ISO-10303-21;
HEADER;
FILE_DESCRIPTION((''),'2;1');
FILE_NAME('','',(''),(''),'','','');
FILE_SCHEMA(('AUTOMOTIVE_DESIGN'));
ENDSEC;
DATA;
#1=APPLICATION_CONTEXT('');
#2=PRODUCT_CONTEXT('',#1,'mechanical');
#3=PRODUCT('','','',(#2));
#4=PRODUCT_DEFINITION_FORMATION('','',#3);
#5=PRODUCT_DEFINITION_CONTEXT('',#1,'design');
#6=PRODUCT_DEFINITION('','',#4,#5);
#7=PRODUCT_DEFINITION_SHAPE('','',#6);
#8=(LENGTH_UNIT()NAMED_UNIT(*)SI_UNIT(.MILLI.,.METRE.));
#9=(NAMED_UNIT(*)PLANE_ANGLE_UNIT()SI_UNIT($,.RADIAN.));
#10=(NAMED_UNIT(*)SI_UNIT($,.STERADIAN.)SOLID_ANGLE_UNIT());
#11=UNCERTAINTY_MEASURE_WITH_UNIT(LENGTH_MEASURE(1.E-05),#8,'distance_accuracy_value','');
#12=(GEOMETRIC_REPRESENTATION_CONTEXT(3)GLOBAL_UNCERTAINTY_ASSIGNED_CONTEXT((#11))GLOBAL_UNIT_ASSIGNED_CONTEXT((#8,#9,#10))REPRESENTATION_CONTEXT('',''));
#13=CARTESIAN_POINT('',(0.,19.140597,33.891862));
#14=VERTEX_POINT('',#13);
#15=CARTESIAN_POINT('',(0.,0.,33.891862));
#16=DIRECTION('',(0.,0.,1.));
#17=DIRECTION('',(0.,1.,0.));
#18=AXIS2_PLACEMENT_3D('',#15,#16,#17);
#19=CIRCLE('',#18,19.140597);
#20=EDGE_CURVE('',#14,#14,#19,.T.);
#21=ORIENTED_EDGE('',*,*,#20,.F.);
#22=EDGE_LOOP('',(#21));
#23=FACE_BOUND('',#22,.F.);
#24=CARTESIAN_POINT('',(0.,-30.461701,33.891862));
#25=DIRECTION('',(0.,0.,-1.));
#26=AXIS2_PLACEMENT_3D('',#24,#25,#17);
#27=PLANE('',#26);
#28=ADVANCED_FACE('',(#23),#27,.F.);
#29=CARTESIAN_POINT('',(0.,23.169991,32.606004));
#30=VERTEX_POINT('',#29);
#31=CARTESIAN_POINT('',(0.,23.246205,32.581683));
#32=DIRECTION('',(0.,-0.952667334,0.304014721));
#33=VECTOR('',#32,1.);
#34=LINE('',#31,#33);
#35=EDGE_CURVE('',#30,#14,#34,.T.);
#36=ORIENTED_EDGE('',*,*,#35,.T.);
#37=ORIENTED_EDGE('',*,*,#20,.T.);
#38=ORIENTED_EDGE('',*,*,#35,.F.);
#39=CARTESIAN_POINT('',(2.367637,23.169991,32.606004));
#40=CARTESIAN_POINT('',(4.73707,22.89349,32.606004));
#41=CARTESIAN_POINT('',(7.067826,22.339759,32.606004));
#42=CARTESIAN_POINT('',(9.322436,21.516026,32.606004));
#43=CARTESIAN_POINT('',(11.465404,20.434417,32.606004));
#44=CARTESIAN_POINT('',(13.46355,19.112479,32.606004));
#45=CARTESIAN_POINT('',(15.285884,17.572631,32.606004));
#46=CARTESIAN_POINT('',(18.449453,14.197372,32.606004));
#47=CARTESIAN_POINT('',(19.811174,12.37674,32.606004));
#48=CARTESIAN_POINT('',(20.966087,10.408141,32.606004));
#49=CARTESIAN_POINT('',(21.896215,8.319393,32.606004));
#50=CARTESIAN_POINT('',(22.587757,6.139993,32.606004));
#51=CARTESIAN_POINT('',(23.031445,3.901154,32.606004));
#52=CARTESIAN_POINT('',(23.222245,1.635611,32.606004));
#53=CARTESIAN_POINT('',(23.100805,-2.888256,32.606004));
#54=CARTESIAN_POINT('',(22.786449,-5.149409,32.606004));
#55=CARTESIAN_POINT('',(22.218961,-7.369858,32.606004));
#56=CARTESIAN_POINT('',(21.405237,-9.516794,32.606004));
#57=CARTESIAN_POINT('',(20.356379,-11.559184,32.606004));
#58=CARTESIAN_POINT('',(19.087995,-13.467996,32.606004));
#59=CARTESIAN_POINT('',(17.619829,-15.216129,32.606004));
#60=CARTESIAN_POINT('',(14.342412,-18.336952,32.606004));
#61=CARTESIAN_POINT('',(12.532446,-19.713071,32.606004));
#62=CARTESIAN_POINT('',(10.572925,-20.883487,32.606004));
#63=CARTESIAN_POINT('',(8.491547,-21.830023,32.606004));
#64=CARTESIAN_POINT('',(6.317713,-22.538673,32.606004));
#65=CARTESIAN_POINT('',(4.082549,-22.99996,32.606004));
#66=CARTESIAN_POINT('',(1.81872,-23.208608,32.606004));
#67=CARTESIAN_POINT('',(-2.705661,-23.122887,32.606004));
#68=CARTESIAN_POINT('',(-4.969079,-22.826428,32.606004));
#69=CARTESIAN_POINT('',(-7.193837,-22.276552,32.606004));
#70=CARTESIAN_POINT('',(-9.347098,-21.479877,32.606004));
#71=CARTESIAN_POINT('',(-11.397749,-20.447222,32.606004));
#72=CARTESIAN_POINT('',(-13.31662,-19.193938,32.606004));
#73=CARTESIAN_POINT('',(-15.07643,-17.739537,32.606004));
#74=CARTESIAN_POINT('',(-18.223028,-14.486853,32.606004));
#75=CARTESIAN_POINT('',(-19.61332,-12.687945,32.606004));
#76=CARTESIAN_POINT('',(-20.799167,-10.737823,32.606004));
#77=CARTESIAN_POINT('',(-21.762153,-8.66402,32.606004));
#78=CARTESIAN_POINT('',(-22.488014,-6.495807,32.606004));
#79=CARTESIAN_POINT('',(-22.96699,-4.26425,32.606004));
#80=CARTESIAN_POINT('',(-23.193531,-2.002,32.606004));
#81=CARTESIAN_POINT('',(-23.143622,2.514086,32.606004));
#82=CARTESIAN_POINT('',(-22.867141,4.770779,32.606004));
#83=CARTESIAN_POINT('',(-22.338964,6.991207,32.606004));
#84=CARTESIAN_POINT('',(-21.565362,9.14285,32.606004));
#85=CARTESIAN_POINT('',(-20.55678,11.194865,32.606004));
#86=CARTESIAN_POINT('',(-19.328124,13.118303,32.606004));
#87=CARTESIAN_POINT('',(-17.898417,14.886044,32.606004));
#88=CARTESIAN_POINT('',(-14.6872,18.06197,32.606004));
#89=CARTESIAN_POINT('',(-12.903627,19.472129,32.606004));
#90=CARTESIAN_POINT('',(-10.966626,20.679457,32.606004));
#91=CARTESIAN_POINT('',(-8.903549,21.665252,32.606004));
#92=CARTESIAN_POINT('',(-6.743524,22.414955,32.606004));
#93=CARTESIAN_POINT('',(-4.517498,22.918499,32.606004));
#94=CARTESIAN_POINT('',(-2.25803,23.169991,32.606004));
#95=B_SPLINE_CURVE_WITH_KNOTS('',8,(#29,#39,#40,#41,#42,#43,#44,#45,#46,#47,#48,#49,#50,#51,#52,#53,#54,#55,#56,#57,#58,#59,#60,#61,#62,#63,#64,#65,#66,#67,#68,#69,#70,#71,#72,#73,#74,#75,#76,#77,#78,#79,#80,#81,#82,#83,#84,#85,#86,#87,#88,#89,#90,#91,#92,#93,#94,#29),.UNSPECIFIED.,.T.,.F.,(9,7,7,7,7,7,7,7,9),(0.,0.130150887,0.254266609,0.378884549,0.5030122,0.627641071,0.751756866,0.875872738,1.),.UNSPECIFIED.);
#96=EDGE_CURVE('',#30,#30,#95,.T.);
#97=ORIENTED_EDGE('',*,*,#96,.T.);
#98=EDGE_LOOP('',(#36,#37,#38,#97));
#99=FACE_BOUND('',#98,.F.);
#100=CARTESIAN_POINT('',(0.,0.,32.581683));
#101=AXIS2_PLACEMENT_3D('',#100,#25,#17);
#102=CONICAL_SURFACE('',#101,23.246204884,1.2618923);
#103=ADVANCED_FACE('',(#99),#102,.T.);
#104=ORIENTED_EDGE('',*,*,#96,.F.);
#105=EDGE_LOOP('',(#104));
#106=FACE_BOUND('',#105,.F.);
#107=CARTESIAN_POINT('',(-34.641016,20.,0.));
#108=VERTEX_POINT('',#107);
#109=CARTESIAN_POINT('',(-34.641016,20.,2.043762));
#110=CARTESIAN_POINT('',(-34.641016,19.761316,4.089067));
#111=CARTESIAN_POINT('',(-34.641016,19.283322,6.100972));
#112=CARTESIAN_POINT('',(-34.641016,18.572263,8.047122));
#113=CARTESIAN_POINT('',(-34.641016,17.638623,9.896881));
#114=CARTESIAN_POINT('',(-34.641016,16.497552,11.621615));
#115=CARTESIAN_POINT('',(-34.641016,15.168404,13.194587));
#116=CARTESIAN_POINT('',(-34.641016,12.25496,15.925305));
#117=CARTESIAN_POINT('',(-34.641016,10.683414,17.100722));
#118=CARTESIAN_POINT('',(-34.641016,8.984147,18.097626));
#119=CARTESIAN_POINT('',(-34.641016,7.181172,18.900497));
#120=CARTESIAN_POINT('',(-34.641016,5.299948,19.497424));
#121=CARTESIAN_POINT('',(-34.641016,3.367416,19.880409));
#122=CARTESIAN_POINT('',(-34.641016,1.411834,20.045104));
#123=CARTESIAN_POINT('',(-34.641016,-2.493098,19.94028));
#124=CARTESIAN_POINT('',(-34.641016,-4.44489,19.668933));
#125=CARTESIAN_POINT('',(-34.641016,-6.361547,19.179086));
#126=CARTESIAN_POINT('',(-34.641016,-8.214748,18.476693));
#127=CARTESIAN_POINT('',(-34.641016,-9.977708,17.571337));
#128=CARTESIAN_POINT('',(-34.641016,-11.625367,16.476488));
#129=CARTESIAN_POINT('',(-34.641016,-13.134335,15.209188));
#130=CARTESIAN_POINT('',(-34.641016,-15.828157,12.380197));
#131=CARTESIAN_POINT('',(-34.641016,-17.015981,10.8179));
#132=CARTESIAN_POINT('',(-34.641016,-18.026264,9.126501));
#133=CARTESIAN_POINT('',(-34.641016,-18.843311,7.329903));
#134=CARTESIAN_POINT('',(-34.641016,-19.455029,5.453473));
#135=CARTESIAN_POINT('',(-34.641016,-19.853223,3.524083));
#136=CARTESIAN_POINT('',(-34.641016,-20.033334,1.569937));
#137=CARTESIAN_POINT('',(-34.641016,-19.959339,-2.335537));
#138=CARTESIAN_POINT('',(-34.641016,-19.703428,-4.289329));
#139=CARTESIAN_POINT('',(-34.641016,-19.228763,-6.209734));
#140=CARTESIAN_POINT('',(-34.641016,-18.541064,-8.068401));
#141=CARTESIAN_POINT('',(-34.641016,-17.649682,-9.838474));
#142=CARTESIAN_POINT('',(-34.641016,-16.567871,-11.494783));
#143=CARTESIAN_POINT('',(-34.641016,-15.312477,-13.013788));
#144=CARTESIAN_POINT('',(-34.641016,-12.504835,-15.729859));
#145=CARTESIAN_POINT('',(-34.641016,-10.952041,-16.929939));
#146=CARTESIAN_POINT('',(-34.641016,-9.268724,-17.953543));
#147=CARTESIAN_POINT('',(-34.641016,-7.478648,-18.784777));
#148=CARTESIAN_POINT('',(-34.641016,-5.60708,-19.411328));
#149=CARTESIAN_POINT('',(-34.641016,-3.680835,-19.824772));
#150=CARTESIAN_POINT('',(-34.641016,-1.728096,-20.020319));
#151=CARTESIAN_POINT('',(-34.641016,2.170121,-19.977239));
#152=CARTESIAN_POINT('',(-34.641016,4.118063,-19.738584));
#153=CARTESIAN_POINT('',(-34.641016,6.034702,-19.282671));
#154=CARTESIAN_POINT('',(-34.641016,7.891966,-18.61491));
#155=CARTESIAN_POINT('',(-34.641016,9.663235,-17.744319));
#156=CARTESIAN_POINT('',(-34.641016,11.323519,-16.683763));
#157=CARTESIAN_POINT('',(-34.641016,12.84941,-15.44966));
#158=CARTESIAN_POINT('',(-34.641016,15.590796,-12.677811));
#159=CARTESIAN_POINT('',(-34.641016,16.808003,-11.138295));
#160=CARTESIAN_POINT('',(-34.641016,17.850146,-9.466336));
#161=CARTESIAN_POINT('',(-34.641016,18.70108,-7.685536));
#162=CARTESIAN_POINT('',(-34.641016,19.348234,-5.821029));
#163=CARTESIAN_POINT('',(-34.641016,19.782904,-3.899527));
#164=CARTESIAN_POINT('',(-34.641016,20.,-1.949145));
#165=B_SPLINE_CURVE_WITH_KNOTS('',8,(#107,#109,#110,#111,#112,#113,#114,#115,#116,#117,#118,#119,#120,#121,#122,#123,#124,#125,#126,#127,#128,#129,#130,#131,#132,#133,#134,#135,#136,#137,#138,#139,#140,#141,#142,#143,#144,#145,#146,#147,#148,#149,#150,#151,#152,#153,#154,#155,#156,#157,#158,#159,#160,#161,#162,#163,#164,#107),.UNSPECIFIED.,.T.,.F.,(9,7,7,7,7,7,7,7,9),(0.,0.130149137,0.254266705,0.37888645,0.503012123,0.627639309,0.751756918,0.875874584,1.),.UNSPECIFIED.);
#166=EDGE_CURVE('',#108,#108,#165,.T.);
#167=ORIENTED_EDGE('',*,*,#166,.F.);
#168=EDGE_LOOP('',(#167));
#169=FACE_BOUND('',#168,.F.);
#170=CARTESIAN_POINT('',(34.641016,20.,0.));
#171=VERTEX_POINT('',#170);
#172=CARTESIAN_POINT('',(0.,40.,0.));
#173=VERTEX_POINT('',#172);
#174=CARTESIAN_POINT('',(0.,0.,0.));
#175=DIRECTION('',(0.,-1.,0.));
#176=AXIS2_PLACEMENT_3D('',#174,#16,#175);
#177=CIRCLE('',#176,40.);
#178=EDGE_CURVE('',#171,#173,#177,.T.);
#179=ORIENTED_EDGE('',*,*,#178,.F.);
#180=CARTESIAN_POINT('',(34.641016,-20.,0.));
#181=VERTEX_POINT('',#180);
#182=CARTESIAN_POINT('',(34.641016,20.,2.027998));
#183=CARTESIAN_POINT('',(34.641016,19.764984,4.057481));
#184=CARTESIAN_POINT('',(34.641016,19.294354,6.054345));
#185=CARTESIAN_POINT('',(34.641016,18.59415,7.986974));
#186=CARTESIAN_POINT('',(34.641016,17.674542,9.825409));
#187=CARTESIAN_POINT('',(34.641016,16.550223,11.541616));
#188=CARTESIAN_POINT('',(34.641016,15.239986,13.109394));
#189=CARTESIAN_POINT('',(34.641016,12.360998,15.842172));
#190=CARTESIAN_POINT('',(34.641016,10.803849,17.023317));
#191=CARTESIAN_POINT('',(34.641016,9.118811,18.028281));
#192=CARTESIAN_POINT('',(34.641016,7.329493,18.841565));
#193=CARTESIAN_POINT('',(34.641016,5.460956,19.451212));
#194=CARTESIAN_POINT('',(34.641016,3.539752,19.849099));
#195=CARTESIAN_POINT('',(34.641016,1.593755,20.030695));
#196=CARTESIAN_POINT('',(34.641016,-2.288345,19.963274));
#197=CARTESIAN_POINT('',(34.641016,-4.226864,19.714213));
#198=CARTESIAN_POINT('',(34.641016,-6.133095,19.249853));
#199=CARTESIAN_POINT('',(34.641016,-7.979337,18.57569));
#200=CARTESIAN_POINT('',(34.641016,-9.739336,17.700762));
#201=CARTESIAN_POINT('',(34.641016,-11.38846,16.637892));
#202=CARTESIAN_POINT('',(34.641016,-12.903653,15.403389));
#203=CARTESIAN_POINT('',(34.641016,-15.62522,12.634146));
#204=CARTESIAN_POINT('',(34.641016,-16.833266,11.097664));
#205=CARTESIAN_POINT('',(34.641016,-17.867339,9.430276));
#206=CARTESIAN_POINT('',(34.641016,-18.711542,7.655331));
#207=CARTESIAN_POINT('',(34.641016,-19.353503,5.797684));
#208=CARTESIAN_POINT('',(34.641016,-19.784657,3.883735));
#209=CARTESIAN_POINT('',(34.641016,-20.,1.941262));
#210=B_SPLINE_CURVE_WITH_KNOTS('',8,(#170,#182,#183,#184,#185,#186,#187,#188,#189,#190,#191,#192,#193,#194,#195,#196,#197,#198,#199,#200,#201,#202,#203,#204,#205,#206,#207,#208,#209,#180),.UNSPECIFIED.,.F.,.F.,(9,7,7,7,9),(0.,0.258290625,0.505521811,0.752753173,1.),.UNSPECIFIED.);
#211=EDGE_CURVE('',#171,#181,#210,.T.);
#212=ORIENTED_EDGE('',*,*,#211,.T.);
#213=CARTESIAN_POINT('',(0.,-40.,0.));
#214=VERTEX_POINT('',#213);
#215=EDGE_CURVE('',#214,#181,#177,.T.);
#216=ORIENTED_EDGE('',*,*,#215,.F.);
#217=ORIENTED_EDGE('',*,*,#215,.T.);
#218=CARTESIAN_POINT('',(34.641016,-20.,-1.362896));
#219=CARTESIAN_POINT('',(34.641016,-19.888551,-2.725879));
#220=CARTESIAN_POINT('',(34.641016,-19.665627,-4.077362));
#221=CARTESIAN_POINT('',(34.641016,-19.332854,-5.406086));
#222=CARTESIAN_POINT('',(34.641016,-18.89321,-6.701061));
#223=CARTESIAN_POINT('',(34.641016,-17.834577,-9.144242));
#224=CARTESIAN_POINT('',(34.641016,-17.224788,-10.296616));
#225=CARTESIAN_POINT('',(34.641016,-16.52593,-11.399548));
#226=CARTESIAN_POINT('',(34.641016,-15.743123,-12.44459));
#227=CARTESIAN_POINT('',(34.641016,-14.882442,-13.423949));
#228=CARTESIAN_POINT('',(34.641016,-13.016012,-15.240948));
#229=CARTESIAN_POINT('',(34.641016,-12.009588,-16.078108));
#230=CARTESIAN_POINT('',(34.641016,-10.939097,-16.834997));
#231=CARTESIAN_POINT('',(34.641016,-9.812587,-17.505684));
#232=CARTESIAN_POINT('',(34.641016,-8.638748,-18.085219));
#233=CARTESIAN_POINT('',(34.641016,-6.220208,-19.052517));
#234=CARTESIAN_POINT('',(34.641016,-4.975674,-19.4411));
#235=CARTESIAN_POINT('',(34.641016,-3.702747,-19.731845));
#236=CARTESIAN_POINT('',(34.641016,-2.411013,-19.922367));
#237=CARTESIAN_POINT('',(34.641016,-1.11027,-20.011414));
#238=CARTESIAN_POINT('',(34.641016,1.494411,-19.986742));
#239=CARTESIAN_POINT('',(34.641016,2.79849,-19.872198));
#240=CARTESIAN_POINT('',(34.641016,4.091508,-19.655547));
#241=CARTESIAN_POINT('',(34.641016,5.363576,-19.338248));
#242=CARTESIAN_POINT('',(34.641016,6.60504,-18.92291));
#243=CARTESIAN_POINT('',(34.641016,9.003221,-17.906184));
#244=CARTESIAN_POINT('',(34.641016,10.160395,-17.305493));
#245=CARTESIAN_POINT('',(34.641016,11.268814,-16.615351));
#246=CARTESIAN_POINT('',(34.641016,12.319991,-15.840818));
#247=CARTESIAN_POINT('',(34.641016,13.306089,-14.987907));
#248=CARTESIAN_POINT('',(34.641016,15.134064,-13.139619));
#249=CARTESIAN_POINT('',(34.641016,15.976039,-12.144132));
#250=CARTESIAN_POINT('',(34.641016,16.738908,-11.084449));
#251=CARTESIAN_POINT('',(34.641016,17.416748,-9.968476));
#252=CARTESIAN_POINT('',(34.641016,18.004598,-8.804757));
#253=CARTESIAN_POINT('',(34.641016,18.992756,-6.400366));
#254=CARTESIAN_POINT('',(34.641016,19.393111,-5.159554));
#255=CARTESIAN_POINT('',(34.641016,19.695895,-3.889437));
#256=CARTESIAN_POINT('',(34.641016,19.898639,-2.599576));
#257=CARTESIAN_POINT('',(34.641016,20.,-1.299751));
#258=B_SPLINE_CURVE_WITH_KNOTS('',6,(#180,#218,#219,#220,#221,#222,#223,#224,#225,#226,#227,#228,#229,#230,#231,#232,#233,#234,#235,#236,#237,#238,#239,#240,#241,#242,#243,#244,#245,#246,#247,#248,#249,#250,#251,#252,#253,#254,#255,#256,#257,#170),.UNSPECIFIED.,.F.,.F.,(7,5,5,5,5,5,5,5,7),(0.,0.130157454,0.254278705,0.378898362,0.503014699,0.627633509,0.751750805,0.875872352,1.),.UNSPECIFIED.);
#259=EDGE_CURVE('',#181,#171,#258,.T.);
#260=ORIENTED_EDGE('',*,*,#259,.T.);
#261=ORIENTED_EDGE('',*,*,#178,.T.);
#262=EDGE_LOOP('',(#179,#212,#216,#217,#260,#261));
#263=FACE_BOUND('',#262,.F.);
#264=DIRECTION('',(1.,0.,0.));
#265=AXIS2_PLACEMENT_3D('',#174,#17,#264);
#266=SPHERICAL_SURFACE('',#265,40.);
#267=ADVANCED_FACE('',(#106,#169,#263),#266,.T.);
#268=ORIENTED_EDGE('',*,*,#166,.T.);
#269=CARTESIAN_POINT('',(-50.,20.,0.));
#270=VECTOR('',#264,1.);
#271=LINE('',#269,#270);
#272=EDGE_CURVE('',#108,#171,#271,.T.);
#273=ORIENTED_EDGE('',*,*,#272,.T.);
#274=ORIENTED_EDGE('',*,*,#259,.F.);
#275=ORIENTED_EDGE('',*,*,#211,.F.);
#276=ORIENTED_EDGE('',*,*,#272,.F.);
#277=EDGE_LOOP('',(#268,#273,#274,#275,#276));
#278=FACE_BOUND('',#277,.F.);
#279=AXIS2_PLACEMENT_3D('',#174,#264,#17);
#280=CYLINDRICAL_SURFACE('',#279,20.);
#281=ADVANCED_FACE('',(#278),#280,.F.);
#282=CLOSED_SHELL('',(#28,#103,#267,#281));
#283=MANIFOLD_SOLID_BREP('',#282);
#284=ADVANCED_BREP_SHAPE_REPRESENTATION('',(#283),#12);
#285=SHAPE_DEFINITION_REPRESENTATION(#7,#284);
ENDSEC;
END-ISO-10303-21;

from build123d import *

# Parameters (mm, degrees)
F2_R     = 20
F3_DEPTH = 50
F4_W     = 62.4089296907
F4_H     = 39.0701051801
F5_DEPTH = 50


# Not quite as in the source:
# - a fillet or chamfer that OpenCascade refuses, or shapes differently, is made with other operations: its cross-section is extruded or revolved along the edge and cut away or added


with BuildPart() as f1:
    # F0 (on Top) → F1 (revolve)
    with BuildSketch(Plane.XY):
        with BuildLine():
            Line((0, 40), (0, -40))
            ThreePointArc((0, -40), (40, 0), (0, 40))
        make_face()
    revolve(axis=Axis((0, 0, 0), (0, -1, 0)))

    # F2 (on Right) → F3 (cut, symmetric)
    with BuildSketch(Plane.YZ):
        Circle(F2_R)
    extrude(amount=F3_DEPTH, both=True, mode=Mode.SUBTRACT)

    # F4 (on Right) → F5 (cut, symmetric)
    with BuildSketch(Plane.YZ):
        with Locations((0.7427642122, 53.4269148484)):
            Rectangle(F4_W, F4_H)
    extrude(amount=F5_DEPTH, both=True, mode=Mode.SUBTRACT)

    # F6: chamfer of 2 on 1 edges, made by hand

    # F6_s1 → F6_t2 (revolve, cut)
    with BuildSketch(Plane.YZ):
        with BuildLine():
            Line((23.2462048843, 32.5816827787), (19.0643837553, 33.916183436))
            Line((19.0643837553, 33.916183436), (19.0643837553, 33.956183436))
            ThreePointArc((19.0643837553, 33.956183436), (20.1545935913, 33.9318622583), (21.2448034273, 33.9318622583))
            Line((21.2448034273, 33.9318622583), (21.2660482307, 33.9257541206))
            ThreePointArc((21.2660482307, 33.9257541206), (22.2709130322, 33.2747356521), (23.2693748758, 32.6142887827))
            Line((23.2693748758, 32.6142887827), (23.2462048843, 32.5816827787))
        make_face()
    revolve(axis=Axis((0, 0, 33.8918622583), (0, 0, -1)), mode=Mode.SUBTRACT)


solid = f1.part
